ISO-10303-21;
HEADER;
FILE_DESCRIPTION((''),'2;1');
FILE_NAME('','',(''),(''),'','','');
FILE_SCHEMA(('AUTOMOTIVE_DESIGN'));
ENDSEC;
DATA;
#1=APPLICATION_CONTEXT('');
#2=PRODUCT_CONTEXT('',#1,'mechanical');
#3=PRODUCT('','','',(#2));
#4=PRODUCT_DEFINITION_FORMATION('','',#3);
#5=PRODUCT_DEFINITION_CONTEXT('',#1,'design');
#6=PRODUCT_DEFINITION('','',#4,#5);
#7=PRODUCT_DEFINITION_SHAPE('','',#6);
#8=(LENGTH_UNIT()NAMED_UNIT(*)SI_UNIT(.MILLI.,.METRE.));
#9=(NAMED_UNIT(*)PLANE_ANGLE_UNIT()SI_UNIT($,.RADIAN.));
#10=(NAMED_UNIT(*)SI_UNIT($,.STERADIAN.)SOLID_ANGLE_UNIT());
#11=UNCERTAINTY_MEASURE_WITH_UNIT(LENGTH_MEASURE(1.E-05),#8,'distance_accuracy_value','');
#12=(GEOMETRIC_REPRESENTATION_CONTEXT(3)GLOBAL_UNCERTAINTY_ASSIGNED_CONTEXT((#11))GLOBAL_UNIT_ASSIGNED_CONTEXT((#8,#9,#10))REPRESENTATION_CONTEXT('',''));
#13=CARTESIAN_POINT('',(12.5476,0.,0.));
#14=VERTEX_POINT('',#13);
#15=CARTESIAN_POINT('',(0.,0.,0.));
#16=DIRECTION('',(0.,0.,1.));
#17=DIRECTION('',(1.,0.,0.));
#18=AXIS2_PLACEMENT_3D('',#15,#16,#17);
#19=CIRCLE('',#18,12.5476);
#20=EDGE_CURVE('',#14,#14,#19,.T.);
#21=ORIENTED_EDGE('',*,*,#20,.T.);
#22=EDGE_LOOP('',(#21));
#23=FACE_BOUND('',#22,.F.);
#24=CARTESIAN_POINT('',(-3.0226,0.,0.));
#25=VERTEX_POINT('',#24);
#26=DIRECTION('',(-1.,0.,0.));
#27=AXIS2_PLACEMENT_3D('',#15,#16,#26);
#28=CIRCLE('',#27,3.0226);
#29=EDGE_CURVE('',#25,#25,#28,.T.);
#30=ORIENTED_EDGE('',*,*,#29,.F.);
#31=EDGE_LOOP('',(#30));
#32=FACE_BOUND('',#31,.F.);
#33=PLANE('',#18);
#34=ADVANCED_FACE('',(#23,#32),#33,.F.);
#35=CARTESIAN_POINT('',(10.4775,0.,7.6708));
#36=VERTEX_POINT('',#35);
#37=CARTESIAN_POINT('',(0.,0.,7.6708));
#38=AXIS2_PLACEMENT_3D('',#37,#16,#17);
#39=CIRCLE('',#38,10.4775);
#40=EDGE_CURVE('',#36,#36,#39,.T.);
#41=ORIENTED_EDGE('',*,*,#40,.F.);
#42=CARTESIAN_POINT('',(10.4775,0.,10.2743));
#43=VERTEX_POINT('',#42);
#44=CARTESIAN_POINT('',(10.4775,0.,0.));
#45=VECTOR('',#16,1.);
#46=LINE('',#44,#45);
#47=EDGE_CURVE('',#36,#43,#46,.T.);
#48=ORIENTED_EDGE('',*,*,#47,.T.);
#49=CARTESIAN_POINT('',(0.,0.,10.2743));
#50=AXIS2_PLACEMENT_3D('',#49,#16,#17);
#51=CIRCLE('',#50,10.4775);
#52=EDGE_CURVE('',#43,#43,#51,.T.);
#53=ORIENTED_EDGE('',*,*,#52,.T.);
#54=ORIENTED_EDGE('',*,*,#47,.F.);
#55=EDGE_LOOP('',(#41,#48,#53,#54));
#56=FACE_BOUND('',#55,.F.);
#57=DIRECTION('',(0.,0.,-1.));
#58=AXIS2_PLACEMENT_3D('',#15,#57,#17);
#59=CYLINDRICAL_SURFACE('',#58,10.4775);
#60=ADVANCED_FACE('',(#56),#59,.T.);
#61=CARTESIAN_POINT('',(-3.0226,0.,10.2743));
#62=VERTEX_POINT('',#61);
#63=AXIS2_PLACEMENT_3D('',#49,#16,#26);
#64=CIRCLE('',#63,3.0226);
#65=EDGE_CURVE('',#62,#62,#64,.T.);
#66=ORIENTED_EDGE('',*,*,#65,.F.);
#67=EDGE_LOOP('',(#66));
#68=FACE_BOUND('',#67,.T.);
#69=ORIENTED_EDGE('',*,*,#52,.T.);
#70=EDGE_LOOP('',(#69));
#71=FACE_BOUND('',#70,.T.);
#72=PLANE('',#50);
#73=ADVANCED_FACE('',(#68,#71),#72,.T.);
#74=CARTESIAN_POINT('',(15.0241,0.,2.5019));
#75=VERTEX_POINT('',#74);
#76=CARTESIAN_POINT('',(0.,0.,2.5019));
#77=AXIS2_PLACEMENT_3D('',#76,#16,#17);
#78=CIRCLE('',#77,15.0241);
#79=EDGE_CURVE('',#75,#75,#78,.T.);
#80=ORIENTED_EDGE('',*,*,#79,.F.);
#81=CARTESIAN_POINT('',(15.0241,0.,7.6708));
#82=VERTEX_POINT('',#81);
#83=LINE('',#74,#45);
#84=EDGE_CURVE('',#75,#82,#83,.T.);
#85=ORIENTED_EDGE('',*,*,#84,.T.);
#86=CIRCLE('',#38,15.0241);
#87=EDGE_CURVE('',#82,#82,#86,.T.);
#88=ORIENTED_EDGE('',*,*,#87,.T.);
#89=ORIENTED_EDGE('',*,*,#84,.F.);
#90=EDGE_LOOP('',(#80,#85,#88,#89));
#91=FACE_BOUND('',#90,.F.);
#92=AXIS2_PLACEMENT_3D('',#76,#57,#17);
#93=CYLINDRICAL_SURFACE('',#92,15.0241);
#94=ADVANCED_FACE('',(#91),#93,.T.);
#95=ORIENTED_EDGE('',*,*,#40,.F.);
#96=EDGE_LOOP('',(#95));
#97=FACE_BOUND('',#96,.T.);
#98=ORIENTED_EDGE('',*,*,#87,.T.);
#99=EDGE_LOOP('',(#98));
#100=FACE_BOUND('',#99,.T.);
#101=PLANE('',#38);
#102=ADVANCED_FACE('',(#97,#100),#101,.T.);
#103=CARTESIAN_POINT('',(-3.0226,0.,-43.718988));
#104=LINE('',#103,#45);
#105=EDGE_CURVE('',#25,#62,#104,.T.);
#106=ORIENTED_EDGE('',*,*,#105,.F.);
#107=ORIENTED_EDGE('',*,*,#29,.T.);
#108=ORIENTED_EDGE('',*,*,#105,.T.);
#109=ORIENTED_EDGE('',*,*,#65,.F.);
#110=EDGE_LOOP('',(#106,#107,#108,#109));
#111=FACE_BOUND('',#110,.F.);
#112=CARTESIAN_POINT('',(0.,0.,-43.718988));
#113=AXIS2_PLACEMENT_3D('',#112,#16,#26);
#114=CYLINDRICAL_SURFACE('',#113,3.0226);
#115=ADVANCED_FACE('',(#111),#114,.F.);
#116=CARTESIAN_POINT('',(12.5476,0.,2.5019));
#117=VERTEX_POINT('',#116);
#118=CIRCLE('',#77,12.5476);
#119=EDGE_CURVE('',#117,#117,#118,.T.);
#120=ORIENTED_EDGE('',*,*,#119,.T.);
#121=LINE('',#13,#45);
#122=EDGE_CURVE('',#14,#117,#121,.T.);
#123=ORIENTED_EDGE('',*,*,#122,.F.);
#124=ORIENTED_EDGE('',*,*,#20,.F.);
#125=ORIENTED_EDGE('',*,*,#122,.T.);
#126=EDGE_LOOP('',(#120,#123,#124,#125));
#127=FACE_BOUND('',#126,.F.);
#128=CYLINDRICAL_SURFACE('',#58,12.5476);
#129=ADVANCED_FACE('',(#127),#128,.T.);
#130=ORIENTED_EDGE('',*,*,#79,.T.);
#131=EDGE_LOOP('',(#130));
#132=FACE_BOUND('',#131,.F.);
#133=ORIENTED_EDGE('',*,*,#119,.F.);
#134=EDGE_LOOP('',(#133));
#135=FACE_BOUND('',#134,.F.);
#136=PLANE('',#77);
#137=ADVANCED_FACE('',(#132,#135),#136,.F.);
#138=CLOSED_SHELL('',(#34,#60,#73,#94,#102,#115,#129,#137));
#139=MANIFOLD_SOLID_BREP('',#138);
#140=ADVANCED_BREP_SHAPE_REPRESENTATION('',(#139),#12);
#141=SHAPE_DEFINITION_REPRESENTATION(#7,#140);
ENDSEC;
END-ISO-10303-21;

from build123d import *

# Parameters (mm, degrees)
F0_R     = 10.4775
F1_DEPTH = 10.2743
F0_R_2   = 12.5476
F2_DEPTH = 7.6708
F3_START = 2.5019
F0_R_3   = 15.0241
F3_DEPTH = 5.1689
F4_D     = 6.0452


# Not quite as in the source:
# - a feature names something its author has since deleted; it is built from what else it names


with BuildPart() as f1:
    # F0 (on Top) → F1 (new body)
    with BuildSketch(Plane.XY):
        Circle(F0_R)
    extrude(amount=F1_DEPTH)

    # F0 (on Top) → F2 (join)
    with BuildSketch(Plane.XY):
        Circle(F0_R_2)
        Circle(F0_R, mode=Mode.SUBTRACT)
    extrude(amount=F2_DEPTH)

    # F0 (on Top) → F3 (join)
    with BuildSketch(Plane.XY.offset(F3_START)):
        Circle(F0_R_3)
        Circle(F0_R_2, mode=Mode.SUBTRACT)
    extrude(amount=F3_DEPTH)

    # F4 (through all)
    with Locations(Plane(origin=(0, 0, 0), x_dir=(1, 0, 0), z_dir=(0, 0, -1))):
        with Locations((0, 0)):
            Hole(F4_D / 2)


solid = f1.part
